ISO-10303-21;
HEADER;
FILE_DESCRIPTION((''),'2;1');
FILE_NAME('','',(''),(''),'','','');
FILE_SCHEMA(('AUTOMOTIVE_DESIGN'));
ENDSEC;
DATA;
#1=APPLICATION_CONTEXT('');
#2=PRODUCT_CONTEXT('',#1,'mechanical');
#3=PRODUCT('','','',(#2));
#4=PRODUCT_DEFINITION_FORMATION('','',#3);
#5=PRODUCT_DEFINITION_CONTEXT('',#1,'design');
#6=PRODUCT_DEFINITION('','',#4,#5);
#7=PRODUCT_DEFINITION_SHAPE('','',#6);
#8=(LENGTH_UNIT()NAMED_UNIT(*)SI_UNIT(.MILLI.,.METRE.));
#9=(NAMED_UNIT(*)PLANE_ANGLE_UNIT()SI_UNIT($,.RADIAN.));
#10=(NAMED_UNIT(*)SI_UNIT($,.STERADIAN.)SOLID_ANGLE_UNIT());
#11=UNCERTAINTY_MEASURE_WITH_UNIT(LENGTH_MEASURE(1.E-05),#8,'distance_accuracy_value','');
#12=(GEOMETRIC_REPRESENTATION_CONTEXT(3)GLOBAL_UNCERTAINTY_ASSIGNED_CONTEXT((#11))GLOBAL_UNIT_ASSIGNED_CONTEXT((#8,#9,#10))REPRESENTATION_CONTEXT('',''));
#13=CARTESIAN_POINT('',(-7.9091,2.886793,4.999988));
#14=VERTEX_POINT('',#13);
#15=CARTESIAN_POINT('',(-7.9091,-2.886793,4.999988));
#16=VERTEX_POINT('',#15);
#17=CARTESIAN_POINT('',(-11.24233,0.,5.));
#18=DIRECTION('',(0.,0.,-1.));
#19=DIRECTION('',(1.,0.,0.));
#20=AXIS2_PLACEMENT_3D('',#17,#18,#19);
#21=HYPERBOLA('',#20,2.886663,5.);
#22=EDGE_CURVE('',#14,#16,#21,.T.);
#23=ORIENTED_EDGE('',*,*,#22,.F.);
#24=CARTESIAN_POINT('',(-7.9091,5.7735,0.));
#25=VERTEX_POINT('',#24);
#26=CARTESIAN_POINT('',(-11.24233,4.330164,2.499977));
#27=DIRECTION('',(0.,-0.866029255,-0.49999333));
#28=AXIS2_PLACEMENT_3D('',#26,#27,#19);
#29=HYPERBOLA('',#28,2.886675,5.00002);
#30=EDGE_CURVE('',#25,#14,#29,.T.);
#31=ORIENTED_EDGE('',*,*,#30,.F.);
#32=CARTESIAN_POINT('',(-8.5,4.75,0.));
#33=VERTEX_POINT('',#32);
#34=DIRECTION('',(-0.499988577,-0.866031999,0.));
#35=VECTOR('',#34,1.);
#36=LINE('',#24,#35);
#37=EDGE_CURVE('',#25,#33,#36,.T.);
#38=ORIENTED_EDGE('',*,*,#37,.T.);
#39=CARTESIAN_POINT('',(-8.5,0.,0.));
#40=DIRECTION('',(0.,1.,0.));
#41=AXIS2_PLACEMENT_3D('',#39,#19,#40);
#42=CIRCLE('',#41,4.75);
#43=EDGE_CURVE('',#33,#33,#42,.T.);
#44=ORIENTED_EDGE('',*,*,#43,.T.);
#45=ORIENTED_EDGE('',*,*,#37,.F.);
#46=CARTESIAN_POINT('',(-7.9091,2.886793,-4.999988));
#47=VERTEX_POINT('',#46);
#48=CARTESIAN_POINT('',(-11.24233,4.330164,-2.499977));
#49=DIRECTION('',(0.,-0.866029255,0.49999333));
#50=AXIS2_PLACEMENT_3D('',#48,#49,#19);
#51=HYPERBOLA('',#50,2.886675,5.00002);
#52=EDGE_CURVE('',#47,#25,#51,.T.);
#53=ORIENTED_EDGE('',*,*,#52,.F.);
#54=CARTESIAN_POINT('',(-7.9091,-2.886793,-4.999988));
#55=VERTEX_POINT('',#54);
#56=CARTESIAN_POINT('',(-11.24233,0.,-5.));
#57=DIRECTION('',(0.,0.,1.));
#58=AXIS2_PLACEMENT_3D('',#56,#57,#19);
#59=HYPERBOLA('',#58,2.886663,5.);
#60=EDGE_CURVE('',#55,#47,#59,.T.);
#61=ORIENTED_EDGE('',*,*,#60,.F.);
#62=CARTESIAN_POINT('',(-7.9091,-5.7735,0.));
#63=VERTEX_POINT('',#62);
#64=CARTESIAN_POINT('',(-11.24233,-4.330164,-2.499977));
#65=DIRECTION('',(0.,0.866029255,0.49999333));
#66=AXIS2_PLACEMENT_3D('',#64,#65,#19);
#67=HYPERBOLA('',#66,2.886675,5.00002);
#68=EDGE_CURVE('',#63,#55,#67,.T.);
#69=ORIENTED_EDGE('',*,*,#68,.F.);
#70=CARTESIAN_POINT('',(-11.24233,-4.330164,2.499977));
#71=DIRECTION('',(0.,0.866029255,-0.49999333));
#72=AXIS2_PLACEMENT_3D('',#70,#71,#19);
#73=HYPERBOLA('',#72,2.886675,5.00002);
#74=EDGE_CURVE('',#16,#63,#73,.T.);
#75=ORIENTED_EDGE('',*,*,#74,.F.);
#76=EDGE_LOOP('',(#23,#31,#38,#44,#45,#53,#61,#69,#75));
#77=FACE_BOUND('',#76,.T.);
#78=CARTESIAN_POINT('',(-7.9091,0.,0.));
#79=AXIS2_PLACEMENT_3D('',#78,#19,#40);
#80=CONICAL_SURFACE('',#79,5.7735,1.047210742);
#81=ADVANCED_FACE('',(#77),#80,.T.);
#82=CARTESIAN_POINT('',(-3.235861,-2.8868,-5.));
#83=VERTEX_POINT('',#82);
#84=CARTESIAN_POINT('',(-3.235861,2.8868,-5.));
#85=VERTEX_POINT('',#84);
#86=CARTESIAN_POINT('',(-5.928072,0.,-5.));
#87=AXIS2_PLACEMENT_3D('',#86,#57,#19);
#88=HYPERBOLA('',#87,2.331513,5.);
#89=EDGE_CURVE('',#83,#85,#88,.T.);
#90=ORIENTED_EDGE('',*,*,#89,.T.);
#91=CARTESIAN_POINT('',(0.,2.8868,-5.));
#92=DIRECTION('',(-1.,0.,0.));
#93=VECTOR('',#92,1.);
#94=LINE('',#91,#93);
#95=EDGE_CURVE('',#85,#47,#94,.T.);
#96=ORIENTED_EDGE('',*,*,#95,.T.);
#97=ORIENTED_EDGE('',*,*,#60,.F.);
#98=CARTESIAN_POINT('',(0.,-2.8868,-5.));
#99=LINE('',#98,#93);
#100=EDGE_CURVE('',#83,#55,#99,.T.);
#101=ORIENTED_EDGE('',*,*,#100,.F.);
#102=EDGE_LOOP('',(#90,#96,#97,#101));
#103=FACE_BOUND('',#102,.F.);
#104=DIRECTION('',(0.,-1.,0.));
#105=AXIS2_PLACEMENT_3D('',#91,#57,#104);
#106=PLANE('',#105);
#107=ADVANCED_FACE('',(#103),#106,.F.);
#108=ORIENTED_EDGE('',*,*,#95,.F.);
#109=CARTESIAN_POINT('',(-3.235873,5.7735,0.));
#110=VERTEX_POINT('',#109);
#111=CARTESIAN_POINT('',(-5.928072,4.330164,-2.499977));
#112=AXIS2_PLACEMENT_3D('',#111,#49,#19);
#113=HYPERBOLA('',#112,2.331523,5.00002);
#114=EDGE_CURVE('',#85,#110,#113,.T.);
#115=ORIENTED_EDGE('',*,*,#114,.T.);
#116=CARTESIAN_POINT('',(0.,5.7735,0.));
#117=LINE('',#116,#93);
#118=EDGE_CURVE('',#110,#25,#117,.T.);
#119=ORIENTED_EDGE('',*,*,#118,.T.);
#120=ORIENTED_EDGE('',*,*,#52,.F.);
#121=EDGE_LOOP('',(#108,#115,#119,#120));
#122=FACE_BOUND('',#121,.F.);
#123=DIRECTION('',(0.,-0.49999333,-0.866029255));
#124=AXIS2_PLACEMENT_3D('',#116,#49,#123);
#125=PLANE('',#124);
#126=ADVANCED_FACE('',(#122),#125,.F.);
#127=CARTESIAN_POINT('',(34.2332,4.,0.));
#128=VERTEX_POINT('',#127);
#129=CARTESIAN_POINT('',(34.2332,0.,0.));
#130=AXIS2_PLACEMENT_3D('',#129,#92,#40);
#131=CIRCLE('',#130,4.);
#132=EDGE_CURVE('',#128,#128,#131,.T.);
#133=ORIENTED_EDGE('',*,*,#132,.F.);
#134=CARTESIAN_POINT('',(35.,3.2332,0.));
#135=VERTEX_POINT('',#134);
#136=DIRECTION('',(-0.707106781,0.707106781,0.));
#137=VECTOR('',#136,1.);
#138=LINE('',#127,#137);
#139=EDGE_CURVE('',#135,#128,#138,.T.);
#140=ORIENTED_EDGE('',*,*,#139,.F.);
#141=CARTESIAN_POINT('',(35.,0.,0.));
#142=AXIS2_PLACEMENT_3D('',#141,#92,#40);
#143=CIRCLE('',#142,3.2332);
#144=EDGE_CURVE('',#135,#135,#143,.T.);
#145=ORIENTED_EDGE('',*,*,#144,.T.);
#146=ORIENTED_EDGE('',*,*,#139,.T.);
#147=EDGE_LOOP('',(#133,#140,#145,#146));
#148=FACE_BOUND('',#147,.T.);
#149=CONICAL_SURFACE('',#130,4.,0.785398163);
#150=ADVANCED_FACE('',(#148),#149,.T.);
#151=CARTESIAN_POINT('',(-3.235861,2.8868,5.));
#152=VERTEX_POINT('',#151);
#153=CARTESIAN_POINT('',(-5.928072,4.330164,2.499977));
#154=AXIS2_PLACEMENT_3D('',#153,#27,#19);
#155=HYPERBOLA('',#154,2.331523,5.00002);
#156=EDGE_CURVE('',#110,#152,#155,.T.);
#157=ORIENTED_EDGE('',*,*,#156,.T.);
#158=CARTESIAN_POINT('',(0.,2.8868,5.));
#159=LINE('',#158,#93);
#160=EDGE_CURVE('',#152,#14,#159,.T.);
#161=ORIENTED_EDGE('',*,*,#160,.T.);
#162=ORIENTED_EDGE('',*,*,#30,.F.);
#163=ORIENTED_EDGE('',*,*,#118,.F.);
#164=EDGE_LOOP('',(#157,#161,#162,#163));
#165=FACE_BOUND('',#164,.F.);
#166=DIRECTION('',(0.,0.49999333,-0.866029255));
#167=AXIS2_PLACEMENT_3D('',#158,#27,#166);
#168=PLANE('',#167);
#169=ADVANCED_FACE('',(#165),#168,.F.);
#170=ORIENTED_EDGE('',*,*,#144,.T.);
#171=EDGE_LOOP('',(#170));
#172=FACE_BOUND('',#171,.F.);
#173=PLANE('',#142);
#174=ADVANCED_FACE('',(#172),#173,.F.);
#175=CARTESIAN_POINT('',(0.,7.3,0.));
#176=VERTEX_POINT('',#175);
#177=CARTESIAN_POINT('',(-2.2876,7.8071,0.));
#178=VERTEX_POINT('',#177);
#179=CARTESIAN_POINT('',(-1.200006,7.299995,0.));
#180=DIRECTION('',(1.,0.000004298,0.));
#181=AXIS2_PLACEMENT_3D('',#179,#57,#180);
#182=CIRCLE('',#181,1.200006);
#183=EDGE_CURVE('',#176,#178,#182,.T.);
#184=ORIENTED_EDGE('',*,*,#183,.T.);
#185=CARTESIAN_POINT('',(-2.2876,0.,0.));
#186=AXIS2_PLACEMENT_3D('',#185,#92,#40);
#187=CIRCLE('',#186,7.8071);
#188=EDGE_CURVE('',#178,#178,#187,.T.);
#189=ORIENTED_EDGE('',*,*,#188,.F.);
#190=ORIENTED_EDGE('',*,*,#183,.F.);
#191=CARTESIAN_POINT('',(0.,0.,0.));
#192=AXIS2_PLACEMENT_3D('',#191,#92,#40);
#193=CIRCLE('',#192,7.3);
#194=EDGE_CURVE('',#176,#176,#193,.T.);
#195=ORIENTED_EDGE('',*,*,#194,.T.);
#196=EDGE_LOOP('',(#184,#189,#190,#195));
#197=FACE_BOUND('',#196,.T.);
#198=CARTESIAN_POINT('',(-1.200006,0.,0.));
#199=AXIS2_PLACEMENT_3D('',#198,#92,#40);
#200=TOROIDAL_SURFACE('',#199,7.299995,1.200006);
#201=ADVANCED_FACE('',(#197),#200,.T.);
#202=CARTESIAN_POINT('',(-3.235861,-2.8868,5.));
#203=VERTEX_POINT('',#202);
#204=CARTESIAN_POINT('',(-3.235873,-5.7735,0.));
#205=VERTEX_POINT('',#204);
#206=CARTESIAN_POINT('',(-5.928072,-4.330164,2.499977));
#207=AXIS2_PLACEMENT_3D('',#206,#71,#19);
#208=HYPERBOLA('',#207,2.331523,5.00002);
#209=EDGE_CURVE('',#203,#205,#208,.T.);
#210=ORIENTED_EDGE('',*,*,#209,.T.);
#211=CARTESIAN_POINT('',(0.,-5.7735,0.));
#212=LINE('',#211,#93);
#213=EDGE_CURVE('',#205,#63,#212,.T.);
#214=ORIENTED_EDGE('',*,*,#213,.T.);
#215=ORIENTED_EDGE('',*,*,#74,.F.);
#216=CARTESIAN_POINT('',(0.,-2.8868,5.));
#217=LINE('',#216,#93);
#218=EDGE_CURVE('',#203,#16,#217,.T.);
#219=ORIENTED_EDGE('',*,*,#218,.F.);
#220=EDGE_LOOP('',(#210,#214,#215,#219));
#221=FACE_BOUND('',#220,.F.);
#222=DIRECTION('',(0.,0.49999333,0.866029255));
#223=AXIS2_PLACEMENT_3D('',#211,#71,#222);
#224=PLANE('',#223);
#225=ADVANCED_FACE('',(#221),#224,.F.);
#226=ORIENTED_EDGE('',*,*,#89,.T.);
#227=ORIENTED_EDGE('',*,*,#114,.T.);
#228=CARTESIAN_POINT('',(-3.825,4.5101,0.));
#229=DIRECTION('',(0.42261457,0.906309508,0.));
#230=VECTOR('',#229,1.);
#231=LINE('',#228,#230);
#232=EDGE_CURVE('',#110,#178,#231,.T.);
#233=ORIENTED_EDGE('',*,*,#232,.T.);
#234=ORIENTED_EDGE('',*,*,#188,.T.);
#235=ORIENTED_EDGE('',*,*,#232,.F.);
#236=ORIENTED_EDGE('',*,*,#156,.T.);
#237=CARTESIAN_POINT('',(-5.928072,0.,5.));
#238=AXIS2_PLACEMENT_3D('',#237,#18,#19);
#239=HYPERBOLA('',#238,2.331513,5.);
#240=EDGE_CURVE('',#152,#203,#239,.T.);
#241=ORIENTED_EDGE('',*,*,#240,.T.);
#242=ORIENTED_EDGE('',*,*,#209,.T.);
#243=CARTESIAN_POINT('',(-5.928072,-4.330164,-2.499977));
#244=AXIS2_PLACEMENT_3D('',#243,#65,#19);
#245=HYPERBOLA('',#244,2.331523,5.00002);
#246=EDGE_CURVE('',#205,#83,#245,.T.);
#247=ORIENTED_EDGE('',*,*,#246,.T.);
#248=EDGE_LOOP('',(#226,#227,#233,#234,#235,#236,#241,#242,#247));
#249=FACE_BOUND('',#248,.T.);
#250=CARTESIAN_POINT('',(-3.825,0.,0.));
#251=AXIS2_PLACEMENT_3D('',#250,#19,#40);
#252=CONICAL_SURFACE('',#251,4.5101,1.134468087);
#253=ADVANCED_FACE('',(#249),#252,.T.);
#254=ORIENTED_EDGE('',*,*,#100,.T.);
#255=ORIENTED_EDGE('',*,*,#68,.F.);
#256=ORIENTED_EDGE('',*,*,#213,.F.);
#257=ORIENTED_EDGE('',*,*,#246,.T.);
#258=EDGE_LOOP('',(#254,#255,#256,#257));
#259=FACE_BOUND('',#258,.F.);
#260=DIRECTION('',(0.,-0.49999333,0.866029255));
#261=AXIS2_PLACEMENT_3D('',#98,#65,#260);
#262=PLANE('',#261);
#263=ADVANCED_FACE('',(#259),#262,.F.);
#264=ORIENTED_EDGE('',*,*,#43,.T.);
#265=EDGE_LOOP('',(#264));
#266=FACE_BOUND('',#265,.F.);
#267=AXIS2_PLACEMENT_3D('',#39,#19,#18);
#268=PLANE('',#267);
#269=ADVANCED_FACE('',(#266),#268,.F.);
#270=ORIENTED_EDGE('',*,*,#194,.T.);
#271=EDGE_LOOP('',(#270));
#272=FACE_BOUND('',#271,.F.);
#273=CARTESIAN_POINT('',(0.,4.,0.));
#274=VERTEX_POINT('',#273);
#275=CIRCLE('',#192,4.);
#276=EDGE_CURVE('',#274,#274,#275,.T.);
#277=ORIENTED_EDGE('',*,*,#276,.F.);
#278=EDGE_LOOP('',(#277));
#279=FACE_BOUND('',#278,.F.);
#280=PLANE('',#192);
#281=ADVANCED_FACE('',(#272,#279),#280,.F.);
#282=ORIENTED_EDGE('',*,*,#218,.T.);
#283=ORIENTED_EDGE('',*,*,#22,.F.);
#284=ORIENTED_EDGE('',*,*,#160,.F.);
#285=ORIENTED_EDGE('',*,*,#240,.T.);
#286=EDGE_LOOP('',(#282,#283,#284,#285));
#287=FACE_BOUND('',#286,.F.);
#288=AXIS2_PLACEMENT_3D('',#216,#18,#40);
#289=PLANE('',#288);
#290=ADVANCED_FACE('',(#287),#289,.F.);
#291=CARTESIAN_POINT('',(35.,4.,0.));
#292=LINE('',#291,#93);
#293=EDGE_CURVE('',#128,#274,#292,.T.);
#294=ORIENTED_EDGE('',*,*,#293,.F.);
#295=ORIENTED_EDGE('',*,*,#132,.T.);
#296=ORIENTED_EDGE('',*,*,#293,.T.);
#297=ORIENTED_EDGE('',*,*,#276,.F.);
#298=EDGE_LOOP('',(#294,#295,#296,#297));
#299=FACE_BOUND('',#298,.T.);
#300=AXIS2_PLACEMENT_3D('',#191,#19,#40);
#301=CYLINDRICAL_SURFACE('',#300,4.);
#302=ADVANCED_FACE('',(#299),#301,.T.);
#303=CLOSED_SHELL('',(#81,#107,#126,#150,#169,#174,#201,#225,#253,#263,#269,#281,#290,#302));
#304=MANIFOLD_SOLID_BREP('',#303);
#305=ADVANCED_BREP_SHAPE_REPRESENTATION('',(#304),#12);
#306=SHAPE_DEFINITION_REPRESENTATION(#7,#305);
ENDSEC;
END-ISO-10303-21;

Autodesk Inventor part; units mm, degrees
ref_plane "YZ Plane" through (0, 0, 0) normal (1, 0, 0) x (0, 1, 0)
ref_plane "XZ Plane" through (0, 0, 0) normal (0, 1, 0) x (-1, 0, 0)
sketch "Sketch1" plane through (0, 0, 0) normal (0, 0, 1) x (1, 0, 0)
  line L0 (-3.825, 0) -> (-3.825, 4.5101)
  line L1 (0, 7.3) -> (0, 4)
  line L2 (13, 4) -> (35, 4)
  line L3 (35, 4) -> (35, 0)
  line L4 (35, 0) -> (-3.825, 0)
  arc A0 (0, 7.3) -> (-2.2876, 7.8071) centre (-1.2, 7.3) ccw
  line L5 (0, -1.745) -> (0, 10.4702) projected
  line L6 (-11.59, 0) -> (42.765, 0) projected
  line L7 (0, 4) -> (0.0001, 4)
  line L8 (0.0001, 4) -> (0.0001, 4)
  line L9 (0.0001, 4) -> (12.2332, 4)
  line L10 (12.2332, 4) -> (13, 4)
  line L11 (-3.825, 4.5101) -> (-2.2876, 7.8071)
  line L12 (0.0001, 4) -> (13, 4) construction
  line L13 (13, 4) -> (13, 0) construction
  dimension "d0" = 1.2
  dimension "d1" = 35
  dimension "d2" = 22
  dimension "d3" = 17
  dimension "d4" = 8
  dimension "d5" = 3.825
  dimension "d15" = 8
  dimension "d16" = 8
  dimension "d17" = 0.0001
  dimension "d18" = 0.7668
  dimension "d19" = 25
revolve "Body" add sketch "Sketch1" angle 360 about axis through (35, 0, 0) along (-1, 0, 0)
sketch "Sketch2" plane through (0, 0, 0) normal (1, 0, 0) x (0, 0, -1)
  line L0 (5, 2.8868) -> (5, -2.8868)
  line L1 (5, -2.8868) -> (0, -5.7735)
  line L2 (0, -5.7735) -> (-5, -2.8868)
  line L3 (-5, -2.8868) -> (-5, 2.8868)
  line L4 (-5, 2.8868) -> (0, 5.7735)
  line L5 (0, 5.7735) -> (5, 2.8868)
  point P0 (0, 0)
  point P1 (0, 0)
  dimension "d23" = 10
extrude "Head" add sketch "Sketch2" against normal blind 8.5
sketch "Sketch3" plane through (0, 0, 0) normal (0, 0, 1) x (1, 0, 0)
  line L0 (-8.5, 4.75) -> (-8.5, 5.7735)
  line L1 (-8.5, 5.7735) -> (-7.9091, 5.7735)
  line L2 (-7.9091, 5.7735) -> (-8.5, 4.75)
  line L3 (-9.5528, 0) -> (-2.183, 0) projected
  line L4 (-8.5, 5.7735) -> (-8.5, 2.8868) projected
  line L5 (-3.2359, 5.7735) -> (-8.5, 5.7735) projected
  point P0 (-8.5, 2.8868)
  dimension "d8" = 30
  dimension "d22" = 9.5
revolve "Chamfer1" cut sketch "Sketch3" angle 360 about axis through (-10, 0, 0) along (1, 0, 0)
thread "Thread" size "M8x1.25" class "6g" standard "ISO Metric profile" length 22
chamfer "Chamfer2" distance 0.7668 distance2 0.7668 1 edges at (35, -4, 0) measured on face at (35, 1.5232, 1.2467)
ref_plane "Work Plane1" through (10.95, 0, 0) normal (0, 0, -1) x (1, 0, 0)
equation "\"d0\" = PHH"
equation "\"d1\" = NLG"
equation "\"d2\" = GEL"
equation "\"d3\" = LADI"
equation "\"d4\" = GD"
equation "\"d5\" = 0.45 * KOH"
equation "\"d15\" = SD2"
equation "\"d16\" = BDM"
equation "\"d18\" = GAL"
equation "\"d19\" = KEWI"
equation "\"d23\" = SW"
equation "\"d6\" = KOH"
equation "\"d8\" = ANG1"
equation "\"d22\" = SW0"
equation "\"d10\" = GEL"
equation "\"d13\" = -0.5 * SPD + 0.5 * GD"
equation "\"d14\" = GUL"
equation "\"NLG\" = 35"
equation "\"GD\" = NND"
equation "\"BDM\" = NND"
equation "\"KOH\" = 8.5"
equation "\"GEL\" = 22"
equation "\"LADI\" = 17"
equation "\"SW\" = 10"
equation "\"PHH\" = RR"
equation "\"SW0\" = 9.5"
equation "\"SPD\" = NND - 1.2269 * PTC"
equation "\"SD2\" = NND"
equation "\"SD\" = 0"
equation "\"ANG1\" = 30deg"
equation "\"KEWI\" = 25deg"
equation "\"GAL\" = 0.61345 * PTC"
equation "\"GUL\" = 0.61345 * PTC"
equation "\"PTC\" = 1.25"
equation "\"THREADDIA\" = 8"
equation "\"E0\" = 1.155 * SW"
equation "\"TOA\" = 30deg"
equation "\"NND\" = 8"
equation "\"GD1\" = THREADDIA - 1.2269 * PTC"
equation "\"KOH1\" = 3.8"
equation "\"RR\" = 1.2"
properties part number "ISO 4162 - M8 x 35" material "Stainless Steel"
